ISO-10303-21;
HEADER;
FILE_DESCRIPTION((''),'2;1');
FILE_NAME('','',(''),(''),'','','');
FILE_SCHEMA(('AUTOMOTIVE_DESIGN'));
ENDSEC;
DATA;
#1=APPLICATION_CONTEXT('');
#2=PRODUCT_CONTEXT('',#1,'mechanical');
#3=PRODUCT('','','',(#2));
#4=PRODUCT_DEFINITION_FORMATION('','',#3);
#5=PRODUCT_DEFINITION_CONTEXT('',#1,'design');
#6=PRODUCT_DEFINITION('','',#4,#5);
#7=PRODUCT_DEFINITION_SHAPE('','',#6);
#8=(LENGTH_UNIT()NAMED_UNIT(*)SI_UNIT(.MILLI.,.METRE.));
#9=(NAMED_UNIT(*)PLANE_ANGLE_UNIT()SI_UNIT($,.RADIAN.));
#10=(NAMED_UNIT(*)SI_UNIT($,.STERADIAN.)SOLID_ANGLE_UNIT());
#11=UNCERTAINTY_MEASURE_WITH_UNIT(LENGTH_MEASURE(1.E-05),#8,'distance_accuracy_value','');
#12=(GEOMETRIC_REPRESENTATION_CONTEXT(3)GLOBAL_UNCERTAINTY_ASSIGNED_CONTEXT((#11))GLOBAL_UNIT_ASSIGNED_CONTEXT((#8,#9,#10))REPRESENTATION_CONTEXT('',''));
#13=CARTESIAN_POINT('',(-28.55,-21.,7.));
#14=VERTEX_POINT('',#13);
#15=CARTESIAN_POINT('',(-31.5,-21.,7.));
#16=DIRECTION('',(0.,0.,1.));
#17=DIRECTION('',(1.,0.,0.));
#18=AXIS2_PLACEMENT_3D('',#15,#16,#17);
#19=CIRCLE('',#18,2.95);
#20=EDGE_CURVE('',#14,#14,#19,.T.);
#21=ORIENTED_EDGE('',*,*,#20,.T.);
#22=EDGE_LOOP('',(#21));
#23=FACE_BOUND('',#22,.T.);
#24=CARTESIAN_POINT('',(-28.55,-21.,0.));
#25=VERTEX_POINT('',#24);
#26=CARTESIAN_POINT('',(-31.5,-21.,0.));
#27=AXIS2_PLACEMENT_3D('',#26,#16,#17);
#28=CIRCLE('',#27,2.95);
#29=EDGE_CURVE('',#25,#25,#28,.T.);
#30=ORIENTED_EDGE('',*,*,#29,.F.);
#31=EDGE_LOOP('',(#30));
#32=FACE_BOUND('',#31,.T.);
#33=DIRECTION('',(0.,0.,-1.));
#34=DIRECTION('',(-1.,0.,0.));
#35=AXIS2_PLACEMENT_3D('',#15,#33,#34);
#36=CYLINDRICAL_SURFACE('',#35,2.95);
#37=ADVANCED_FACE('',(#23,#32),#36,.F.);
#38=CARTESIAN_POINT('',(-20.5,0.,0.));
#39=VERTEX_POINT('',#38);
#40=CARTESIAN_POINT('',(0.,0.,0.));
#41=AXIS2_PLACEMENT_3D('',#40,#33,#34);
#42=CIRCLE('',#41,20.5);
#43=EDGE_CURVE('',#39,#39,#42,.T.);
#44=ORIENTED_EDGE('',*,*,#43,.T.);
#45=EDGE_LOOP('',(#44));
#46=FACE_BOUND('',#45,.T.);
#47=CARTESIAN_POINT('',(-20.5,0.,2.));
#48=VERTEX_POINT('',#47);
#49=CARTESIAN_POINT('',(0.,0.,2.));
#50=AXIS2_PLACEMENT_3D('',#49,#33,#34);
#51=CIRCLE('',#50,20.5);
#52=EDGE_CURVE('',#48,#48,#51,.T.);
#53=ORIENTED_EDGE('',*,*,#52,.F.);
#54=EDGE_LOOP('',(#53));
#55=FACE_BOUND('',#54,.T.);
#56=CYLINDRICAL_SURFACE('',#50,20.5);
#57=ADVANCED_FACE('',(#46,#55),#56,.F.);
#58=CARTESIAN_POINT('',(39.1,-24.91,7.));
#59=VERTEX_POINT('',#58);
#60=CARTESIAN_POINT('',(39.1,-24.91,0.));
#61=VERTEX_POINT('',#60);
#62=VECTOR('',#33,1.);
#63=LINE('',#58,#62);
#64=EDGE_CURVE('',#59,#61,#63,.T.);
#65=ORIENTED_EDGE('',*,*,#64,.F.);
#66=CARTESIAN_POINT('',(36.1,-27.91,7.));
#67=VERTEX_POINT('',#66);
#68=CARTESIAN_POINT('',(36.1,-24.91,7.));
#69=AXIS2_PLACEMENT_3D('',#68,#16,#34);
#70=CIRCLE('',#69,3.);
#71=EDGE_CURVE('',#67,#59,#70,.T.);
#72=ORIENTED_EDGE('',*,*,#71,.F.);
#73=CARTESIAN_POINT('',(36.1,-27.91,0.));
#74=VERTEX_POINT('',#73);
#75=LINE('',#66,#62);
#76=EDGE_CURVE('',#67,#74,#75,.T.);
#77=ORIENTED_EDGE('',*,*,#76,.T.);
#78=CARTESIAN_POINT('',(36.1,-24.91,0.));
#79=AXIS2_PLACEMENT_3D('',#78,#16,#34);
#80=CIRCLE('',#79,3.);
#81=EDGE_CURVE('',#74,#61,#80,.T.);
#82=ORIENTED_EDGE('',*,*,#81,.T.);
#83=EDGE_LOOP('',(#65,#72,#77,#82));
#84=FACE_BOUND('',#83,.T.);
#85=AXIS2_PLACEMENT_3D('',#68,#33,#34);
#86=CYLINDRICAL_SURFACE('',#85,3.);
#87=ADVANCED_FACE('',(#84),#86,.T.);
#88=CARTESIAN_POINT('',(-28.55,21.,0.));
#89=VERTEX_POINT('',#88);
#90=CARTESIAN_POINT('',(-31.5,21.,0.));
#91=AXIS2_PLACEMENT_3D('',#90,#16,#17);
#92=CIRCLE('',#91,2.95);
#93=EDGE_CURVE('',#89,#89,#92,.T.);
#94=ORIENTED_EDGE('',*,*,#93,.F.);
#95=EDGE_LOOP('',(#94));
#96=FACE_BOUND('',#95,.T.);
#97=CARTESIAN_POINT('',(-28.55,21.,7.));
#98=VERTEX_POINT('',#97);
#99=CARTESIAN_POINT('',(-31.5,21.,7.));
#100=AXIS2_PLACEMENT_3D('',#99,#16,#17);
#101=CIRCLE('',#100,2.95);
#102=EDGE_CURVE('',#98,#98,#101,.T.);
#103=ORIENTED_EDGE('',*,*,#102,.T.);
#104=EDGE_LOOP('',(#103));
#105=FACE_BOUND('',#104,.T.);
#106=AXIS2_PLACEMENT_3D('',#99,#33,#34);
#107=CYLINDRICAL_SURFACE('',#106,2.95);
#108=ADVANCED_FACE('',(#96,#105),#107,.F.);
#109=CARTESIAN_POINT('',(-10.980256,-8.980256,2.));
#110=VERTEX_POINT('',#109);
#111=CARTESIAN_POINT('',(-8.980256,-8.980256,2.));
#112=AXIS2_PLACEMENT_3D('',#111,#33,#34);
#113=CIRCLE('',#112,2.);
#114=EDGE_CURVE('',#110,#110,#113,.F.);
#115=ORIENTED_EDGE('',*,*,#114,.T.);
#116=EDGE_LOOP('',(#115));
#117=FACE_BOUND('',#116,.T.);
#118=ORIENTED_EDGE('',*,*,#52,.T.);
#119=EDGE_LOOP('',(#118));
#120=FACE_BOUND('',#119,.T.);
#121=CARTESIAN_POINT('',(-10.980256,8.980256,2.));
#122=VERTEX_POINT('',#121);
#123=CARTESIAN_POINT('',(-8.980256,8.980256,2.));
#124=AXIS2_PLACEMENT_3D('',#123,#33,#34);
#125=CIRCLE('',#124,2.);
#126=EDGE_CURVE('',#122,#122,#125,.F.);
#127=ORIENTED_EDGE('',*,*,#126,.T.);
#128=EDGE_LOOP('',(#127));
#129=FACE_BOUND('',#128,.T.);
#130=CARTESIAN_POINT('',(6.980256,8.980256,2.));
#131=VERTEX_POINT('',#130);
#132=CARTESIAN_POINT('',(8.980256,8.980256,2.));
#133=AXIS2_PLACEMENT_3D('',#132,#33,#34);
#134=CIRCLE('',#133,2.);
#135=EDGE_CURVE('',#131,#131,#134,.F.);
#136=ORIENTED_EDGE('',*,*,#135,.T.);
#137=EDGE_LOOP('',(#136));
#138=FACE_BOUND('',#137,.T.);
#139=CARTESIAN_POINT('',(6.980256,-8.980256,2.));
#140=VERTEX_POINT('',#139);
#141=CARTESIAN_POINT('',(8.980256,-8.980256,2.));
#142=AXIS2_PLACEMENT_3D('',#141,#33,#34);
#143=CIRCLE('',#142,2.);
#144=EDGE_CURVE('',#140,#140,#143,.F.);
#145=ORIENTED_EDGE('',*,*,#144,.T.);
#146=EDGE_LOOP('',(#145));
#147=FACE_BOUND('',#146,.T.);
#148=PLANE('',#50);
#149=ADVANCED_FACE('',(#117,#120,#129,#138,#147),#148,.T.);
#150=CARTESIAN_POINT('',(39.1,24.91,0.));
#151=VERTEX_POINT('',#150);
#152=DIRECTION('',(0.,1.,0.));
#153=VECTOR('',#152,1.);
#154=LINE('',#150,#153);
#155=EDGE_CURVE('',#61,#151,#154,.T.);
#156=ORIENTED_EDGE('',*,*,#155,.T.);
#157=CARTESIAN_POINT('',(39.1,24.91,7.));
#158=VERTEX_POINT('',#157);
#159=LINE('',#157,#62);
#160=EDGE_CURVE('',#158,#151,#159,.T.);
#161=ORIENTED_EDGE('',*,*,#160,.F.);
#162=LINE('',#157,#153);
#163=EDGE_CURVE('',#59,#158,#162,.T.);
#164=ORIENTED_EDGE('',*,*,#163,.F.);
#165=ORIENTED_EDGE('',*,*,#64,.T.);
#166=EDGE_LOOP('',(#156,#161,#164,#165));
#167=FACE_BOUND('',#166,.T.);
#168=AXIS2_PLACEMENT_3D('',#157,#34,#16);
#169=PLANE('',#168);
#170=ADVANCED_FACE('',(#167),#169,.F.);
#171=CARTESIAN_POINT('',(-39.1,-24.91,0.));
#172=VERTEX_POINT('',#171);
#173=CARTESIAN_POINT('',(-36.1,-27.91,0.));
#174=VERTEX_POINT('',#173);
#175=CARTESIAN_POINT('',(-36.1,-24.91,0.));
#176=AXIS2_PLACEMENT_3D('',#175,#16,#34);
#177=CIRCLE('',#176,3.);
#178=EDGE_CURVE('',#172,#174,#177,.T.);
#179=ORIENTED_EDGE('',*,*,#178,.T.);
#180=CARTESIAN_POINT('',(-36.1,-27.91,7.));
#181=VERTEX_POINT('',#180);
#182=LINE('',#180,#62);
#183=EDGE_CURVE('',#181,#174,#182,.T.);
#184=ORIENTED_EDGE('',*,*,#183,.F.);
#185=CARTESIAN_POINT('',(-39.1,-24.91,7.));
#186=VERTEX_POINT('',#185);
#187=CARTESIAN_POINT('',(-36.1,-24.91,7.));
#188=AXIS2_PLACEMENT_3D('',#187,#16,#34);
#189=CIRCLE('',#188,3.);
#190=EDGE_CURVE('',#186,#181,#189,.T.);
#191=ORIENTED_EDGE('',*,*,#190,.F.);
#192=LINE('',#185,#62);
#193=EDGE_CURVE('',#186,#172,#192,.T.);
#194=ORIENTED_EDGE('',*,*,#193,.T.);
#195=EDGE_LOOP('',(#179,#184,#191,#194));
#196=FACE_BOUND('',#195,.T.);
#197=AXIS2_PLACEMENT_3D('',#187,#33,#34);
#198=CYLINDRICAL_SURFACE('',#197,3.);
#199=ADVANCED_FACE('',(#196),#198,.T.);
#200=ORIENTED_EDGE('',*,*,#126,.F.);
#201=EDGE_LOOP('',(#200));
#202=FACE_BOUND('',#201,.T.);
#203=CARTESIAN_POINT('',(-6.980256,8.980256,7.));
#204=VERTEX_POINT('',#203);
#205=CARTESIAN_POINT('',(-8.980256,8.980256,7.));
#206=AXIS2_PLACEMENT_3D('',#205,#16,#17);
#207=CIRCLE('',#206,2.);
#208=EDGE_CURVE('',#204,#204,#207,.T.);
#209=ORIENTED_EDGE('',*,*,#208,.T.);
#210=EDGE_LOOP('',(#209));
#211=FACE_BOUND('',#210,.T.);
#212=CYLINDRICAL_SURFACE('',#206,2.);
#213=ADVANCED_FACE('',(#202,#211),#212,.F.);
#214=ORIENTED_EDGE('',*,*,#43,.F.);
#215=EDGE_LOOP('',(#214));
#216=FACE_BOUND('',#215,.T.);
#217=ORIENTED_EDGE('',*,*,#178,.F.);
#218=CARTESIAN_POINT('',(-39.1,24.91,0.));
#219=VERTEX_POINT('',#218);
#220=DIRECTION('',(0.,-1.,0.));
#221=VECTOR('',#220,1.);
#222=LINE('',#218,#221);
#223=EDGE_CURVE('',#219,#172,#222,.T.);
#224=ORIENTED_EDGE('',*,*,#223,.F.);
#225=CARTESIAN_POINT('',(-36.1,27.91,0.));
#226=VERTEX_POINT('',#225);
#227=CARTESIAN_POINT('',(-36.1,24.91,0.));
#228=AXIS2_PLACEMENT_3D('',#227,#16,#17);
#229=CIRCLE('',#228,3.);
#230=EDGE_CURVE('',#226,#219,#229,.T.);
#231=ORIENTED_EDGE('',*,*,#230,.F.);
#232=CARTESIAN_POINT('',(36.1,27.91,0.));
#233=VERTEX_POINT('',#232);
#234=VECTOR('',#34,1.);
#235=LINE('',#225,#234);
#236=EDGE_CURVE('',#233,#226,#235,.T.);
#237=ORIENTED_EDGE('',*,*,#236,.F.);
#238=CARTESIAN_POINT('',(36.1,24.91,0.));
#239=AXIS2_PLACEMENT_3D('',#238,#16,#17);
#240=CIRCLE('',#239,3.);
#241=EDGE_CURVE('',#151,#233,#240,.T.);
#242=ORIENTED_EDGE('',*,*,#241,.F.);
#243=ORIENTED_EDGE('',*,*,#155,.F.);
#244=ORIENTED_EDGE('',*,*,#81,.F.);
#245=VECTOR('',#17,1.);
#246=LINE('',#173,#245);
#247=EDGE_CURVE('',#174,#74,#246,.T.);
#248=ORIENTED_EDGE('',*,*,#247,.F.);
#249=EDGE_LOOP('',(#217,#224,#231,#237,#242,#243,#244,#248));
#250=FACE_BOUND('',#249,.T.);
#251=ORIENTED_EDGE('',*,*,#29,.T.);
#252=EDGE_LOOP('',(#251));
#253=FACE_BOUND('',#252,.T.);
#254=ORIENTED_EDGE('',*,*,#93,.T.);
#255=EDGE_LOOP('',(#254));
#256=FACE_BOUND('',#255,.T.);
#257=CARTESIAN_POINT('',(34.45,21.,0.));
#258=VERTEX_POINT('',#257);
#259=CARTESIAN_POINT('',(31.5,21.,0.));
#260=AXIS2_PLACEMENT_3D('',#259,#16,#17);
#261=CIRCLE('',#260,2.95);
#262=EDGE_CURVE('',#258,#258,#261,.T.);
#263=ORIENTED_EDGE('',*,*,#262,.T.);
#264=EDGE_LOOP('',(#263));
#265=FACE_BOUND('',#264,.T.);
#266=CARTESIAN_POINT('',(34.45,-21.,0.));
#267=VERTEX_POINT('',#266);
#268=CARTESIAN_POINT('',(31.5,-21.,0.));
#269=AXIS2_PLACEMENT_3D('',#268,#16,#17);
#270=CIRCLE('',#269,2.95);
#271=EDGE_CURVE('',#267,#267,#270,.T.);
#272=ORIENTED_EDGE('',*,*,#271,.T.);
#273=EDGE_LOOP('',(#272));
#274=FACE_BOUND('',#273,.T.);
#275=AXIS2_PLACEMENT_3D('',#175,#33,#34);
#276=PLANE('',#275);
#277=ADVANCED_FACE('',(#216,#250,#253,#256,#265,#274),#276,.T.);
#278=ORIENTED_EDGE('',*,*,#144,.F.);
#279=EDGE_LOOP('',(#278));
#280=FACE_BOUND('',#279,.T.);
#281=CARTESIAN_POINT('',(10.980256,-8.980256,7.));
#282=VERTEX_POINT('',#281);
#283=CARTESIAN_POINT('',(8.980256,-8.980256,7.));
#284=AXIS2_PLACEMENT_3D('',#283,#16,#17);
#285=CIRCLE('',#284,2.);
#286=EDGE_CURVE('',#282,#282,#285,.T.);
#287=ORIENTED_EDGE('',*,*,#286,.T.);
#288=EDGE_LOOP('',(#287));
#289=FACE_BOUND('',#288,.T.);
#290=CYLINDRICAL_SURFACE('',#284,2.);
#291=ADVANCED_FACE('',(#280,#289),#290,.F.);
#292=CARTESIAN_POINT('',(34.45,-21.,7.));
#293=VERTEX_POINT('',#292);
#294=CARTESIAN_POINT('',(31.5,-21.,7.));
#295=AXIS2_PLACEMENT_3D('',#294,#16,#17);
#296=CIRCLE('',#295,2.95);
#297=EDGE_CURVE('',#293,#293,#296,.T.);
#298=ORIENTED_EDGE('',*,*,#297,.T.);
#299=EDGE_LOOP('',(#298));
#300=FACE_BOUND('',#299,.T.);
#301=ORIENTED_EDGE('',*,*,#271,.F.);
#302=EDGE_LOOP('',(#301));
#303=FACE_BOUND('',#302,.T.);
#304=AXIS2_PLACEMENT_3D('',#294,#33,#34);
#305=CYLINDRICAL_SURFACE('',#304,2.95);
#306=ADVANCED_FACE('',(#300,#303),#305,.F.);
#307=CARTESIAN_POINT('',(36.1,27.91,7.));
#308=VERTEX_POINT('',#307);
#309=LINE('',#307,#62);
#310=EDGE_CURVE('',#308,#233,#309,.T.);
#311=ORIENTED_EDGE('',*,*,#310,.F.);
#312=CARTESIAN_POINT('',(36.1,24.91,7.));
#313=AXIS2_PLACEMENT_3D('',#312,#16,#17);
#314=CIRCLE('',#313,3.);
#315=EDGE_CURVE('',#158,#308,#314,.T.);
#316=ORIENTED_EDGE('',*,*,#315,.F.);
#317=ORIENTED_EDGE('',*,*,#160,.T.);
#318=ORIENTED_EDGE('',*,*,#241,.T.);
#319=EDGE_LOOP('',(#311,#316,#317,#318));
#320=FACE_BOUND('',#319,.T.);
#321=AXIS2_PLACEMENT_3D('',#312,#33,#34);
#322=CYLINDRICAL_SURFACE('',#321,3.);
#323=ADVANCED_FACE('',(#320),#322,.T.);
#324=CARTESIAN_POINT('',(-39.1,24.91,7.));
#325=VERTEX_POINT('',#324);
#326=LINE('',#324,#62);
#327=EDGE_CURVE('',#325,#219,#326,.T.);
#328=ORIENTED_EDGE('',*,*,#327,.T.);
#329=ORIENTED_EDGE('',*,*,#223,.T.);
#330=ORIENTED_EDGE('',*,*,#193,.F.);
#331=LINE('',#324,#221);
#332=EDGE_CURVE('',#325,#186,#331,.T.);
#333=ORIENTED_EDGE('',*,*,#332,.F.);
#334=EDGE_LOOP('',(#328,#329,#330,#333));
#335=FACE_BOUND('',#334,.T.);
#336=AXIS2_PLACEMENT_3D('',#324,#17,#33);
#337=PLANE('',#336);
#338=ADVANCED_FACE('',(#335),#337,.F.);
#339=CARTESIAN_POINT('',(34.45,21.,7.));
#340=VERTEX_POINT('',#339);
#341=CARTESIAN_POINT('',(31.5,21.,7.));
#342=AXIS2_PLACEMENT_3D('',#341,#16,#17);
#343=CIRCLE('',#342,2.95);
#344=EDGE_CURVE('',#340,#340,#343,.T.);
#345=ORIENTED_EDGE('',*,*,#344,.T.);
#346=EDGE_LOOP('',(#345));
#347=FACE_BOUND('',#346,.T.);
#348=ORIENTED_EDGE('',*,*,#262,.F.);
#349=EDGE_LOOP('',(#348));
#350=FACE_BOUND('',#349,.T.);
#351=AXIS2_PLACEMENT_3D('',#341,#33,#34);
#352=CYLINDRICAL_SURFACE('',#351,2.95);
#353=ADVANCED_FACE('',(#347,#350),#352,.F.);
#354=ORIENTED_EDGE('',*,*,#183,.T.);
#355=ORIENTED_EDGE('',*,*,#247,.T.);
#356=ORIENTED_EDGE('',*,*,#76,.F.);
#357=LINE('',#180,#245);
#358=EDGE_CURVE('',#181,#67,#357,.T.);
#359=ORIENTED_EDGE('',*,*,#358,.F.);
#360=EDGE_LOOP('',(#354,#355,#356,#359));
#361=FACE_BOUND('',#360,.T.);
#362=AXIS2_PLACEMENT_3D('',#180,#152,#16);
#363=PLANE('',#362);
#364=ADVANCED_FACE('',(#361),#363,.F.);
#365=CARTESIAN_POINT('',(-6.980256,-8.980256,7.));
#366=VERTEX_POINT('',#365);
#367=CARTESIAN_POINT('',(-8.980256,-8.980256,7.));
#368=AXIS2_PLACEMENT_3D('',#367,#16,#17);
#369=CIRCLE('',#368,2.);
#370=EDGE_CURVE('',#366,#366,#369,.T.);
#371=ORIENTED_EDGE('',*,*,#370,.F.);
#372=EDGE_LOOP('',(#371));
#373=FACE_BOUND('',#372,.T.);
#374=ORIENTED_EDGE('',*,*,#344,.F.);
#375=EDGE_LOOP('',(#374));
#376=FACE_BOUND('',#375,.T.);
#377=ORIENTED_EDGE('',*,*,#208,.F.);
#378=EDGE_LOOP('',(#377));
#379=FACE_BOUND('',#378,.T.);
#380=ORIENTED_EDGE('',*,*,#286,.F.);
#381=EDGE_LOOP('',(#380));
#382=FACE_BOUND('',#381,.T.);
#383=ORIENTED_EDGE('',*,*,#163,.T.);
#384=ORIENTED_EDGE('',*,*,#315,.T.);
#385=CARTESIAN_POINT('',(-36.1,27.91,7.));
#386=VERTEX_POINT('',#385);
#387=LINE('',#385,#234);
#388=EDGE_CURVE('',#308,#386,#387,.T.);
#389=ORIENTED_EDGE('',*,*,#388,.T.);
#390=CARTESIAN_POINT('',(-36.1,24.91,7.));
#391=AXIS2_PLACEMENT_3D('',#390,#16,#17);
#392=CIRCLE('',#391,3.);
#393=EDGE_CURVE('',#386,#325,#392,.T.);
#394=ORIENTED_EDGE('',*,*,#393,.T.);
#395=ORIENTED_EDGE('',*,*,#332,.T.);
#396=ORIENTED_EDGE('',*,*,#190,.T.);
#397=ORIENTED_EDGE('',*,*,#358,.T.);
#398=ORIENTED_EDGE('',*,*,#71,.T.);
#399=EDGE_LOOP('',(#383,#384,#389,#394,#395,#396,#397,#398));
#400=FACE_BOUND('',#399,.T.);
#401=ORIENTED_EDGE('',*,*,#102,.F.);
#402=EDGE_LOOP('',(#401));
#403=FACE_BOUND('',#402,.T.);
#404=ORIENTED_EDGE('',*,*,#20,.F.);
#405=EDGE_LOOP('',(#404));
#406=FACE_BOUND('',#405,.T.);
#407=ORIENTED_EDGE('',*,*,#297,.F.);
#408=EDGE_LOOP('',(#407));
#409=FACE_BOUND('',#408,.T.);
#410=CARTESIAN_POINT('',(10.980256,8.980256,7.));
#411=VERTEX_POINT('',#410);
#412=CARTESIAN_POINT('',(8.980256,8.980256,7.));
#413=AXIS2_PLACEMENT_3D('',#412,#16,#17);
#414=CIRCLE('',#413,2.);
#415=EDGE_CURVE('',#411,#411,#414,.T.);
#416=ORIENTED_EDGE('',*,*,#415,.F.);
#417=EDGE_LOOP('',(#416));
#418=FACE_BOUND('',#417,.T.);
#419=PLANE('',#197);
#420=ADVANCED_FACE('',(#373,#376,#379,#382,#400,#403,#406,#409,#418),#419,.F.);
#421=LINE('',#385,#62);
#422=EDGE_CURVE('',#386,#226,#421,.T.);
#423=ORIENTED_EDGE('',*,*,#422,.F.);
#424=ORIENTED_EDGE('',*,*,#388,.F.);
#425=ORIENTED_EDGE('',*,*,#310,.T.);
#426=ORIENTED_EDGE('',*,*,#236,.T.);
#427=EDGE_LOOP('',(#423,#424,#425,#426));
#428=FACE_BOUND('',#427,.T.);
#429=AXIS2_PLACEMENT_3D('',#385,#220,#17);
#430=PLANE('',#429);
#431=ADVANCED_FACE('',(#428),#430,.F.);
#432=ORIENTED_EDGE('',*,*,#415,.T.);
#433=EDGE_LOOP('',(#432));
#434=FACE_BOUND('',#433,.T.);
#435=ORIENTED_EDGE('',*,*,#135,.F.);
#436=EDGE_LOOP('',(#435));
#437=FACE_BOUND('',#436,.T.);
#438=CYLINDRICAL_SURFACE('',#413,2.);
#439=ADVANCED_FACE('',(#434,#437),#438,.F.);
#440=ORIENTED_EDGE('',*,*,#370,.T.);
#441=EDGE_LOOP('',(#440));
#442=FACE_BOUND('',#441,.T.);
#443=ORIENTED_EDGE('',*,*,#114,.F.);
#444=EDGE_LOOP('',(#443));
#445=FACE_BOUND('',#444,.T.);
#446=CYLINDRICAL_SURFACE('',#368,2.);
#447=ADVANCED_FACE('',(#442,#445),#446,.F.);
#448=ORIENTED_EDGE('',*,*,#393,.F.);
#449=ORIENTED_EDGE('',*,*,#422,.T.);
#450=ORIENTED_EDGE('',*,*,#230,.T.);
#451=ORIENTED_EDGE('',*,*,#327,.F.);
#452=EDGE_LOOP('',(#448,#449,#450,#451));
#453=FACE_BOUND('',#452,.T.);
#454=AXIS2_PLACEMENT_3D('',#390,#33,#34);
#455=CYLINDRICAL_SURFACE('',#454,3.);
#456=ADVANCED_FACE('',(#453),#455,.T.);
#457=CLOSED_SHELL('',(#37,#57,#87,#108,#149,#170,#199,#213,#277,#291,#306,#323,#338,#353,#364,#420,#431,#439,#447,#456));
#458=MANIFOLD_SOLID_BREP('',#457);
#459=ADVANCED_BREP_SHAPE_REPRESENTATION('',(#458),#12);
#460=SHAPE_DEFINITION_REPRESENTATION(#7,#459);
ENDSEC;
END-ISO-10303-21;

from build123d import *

# Parameters (mm, degrees)
EXTRUDE_1_DEPTH     = 7
CUT_EXTRUDE_1_DEPTH = 49.546658999
F_4_0MM_2_OUTLINE_R = 2
F_4_0MM_2_DEPTH     = 7
SKETCH_6_R          = 20.5
CUT_EXTRUDE_2_DEPTH = 2


# Read off the part's stored shape, not the designer's step: Ø4.0mm 暗销孔2
with BuildPart() as part:
    # 草图2 → 凸台-拉伸1 (new body)
    with BuildSketch(Plane.XY):
        with BuildLine():
            Line((-36.1, 27.91), (36.1, 27.91))
            ThreePointArc((36.1, 27.91), (38.221320344, 27.031320344), (39.1, 24.91))
            Line((39.1, 24.91), (39.1, -24.91))
            ThreePointArc((39.1, -24.91), (38.221320344, -27.031320344), (36.1, -27.91))
            Line((36.1, -27.91), (-36.1, -27.91))
            ThreePointArc((-36.1, -27.91), (-38.221320344, -27.031320344), (-39.1, -24.91))
            Line((-39.1, -24.91), (-39.1, 24.91))
            ThreePointArc((-39.1, 24.91), (-38.221320344, 27.031320344), (-36.1, 27.91))
        make_face()
    extrude(amount=EXTRUDE_1_DEPTH)

    # 草图1 → 切除-拉伸1 (cut, through all)
    with BuildSketch(Plane.XY):
        with BuildLine():
            Line((-31.5, 18.05), (-31.5, 21))
            Line((-31.5, 21), (-28.55, 21))
            ThreePointArc((-28.55, 21), (-33.585965005, 23.085965005), (-31.5, 18.05))
        make_face()
        with BuildLine():
            Line((-28.55, 21), (-31.5, 21))
            Line((-31.5, 21), (-31.5, 18.05))
            ThreePointArc((-31.5, 18.05), (-29.414034995, 18.914034995), (-28.55, 21))
        make_face()
        with BuildLine():
            ThreePointArc((34.45, 21), (31.5, 23.95), (28.55, 21))
            Line((28.55, 21), (31.5, 21))
            Line((31.5, 21), (31.5, 18.05))
            ThreePointArc((31.5, 18.05), (33.585965005, 18.914034995), (34.45, 21))
        make_face()
        with BuildLine():
            Line((31.5, 21), (28.55, 21))
            ThreePointArc((28.55, 21), (29.414034995, 18.914034995), (31.5, 18.05))
            Line((31.5, 18.05), (31.5, 21))
        make_face()
        with BuildLine():
            ThreePointArc((-28.55, -21), (-29.414034995, -18.914034995), (-31.5, -18.05))
            Line((-31.5, -18.05), (-31.5, -21))
            Line((-31.5, -21), (-28.55, -21))
        make_face()
        with BuildLine():
            Line((-31.5, -21), (-31.5, -18.05))
            ThreePointArc((-31.5, -18.05), (-33.585965005, -23.085965005), (-28.55, -21))
            Line((-28.55, -21), (-31.5, -21))
        make_face()
        with BuildLine():
            ThreePointArc((34.45, -21), (33.585965005, -18.914034995), (31.5, -18.05))
            Line((31.5, -18.05), (31.5, -21))
            Line((31.5, -21), (28.55, -21))
            ThreePointArc((28.55, -21), (31.5, -23.95), (34.45, -21))
        make_face()
        with BuildLine():
            Line((31.5, -21), (31.5, -18.05))
            ThreePointArc((31.5, -18.05), (29.414034995, -18.914034995), (28.55, -21))
            Line((28.55, -21), (31.5, -21))
        make_face()
    extrude(amount=CUT_EXTRUDE_1_DEPTH, mode=Mode.SUBTRACT)

    # Ø4.0mm 暗销孔2 outline → Ø4.0mm 暗销孔2 (cut)
    with BuildSketch(Plane.XY):
        with Locations((8.980256121, -8.980256121)):
            Circle(F_4_0MM_2_OUTLINE_R)
        with Locations((-8.980256121, -8.980256121)):
            Circle(F_4_0MM_2_OUTLINE_R)
        with Locations((-8.980256121, 8.980256121)):
            Circle(F_4_0MM_2_OUTLINE_R)
        with Locations((8.980256121, 8.980256121)):
            Circle(F_4_0MM_2_OUTLINE_R)
    extrude(amount=F_4_0MM_2_DEPTH, mode=Mode.SUBTRACT)

    # 草图6 → 切除-拉伸2 (cut)
    with BuildSketch(Plane(origin=(0, 0, 0), x_dir=(-1, 0, 0), z_dir=(0, 0, -1))):
        Circle(SKETCH_6_R)
    extrude(amount=-CUT_EXTRUDE_2_DEPTH, mode=Mode.SUBTRACT)


solid = part.part
